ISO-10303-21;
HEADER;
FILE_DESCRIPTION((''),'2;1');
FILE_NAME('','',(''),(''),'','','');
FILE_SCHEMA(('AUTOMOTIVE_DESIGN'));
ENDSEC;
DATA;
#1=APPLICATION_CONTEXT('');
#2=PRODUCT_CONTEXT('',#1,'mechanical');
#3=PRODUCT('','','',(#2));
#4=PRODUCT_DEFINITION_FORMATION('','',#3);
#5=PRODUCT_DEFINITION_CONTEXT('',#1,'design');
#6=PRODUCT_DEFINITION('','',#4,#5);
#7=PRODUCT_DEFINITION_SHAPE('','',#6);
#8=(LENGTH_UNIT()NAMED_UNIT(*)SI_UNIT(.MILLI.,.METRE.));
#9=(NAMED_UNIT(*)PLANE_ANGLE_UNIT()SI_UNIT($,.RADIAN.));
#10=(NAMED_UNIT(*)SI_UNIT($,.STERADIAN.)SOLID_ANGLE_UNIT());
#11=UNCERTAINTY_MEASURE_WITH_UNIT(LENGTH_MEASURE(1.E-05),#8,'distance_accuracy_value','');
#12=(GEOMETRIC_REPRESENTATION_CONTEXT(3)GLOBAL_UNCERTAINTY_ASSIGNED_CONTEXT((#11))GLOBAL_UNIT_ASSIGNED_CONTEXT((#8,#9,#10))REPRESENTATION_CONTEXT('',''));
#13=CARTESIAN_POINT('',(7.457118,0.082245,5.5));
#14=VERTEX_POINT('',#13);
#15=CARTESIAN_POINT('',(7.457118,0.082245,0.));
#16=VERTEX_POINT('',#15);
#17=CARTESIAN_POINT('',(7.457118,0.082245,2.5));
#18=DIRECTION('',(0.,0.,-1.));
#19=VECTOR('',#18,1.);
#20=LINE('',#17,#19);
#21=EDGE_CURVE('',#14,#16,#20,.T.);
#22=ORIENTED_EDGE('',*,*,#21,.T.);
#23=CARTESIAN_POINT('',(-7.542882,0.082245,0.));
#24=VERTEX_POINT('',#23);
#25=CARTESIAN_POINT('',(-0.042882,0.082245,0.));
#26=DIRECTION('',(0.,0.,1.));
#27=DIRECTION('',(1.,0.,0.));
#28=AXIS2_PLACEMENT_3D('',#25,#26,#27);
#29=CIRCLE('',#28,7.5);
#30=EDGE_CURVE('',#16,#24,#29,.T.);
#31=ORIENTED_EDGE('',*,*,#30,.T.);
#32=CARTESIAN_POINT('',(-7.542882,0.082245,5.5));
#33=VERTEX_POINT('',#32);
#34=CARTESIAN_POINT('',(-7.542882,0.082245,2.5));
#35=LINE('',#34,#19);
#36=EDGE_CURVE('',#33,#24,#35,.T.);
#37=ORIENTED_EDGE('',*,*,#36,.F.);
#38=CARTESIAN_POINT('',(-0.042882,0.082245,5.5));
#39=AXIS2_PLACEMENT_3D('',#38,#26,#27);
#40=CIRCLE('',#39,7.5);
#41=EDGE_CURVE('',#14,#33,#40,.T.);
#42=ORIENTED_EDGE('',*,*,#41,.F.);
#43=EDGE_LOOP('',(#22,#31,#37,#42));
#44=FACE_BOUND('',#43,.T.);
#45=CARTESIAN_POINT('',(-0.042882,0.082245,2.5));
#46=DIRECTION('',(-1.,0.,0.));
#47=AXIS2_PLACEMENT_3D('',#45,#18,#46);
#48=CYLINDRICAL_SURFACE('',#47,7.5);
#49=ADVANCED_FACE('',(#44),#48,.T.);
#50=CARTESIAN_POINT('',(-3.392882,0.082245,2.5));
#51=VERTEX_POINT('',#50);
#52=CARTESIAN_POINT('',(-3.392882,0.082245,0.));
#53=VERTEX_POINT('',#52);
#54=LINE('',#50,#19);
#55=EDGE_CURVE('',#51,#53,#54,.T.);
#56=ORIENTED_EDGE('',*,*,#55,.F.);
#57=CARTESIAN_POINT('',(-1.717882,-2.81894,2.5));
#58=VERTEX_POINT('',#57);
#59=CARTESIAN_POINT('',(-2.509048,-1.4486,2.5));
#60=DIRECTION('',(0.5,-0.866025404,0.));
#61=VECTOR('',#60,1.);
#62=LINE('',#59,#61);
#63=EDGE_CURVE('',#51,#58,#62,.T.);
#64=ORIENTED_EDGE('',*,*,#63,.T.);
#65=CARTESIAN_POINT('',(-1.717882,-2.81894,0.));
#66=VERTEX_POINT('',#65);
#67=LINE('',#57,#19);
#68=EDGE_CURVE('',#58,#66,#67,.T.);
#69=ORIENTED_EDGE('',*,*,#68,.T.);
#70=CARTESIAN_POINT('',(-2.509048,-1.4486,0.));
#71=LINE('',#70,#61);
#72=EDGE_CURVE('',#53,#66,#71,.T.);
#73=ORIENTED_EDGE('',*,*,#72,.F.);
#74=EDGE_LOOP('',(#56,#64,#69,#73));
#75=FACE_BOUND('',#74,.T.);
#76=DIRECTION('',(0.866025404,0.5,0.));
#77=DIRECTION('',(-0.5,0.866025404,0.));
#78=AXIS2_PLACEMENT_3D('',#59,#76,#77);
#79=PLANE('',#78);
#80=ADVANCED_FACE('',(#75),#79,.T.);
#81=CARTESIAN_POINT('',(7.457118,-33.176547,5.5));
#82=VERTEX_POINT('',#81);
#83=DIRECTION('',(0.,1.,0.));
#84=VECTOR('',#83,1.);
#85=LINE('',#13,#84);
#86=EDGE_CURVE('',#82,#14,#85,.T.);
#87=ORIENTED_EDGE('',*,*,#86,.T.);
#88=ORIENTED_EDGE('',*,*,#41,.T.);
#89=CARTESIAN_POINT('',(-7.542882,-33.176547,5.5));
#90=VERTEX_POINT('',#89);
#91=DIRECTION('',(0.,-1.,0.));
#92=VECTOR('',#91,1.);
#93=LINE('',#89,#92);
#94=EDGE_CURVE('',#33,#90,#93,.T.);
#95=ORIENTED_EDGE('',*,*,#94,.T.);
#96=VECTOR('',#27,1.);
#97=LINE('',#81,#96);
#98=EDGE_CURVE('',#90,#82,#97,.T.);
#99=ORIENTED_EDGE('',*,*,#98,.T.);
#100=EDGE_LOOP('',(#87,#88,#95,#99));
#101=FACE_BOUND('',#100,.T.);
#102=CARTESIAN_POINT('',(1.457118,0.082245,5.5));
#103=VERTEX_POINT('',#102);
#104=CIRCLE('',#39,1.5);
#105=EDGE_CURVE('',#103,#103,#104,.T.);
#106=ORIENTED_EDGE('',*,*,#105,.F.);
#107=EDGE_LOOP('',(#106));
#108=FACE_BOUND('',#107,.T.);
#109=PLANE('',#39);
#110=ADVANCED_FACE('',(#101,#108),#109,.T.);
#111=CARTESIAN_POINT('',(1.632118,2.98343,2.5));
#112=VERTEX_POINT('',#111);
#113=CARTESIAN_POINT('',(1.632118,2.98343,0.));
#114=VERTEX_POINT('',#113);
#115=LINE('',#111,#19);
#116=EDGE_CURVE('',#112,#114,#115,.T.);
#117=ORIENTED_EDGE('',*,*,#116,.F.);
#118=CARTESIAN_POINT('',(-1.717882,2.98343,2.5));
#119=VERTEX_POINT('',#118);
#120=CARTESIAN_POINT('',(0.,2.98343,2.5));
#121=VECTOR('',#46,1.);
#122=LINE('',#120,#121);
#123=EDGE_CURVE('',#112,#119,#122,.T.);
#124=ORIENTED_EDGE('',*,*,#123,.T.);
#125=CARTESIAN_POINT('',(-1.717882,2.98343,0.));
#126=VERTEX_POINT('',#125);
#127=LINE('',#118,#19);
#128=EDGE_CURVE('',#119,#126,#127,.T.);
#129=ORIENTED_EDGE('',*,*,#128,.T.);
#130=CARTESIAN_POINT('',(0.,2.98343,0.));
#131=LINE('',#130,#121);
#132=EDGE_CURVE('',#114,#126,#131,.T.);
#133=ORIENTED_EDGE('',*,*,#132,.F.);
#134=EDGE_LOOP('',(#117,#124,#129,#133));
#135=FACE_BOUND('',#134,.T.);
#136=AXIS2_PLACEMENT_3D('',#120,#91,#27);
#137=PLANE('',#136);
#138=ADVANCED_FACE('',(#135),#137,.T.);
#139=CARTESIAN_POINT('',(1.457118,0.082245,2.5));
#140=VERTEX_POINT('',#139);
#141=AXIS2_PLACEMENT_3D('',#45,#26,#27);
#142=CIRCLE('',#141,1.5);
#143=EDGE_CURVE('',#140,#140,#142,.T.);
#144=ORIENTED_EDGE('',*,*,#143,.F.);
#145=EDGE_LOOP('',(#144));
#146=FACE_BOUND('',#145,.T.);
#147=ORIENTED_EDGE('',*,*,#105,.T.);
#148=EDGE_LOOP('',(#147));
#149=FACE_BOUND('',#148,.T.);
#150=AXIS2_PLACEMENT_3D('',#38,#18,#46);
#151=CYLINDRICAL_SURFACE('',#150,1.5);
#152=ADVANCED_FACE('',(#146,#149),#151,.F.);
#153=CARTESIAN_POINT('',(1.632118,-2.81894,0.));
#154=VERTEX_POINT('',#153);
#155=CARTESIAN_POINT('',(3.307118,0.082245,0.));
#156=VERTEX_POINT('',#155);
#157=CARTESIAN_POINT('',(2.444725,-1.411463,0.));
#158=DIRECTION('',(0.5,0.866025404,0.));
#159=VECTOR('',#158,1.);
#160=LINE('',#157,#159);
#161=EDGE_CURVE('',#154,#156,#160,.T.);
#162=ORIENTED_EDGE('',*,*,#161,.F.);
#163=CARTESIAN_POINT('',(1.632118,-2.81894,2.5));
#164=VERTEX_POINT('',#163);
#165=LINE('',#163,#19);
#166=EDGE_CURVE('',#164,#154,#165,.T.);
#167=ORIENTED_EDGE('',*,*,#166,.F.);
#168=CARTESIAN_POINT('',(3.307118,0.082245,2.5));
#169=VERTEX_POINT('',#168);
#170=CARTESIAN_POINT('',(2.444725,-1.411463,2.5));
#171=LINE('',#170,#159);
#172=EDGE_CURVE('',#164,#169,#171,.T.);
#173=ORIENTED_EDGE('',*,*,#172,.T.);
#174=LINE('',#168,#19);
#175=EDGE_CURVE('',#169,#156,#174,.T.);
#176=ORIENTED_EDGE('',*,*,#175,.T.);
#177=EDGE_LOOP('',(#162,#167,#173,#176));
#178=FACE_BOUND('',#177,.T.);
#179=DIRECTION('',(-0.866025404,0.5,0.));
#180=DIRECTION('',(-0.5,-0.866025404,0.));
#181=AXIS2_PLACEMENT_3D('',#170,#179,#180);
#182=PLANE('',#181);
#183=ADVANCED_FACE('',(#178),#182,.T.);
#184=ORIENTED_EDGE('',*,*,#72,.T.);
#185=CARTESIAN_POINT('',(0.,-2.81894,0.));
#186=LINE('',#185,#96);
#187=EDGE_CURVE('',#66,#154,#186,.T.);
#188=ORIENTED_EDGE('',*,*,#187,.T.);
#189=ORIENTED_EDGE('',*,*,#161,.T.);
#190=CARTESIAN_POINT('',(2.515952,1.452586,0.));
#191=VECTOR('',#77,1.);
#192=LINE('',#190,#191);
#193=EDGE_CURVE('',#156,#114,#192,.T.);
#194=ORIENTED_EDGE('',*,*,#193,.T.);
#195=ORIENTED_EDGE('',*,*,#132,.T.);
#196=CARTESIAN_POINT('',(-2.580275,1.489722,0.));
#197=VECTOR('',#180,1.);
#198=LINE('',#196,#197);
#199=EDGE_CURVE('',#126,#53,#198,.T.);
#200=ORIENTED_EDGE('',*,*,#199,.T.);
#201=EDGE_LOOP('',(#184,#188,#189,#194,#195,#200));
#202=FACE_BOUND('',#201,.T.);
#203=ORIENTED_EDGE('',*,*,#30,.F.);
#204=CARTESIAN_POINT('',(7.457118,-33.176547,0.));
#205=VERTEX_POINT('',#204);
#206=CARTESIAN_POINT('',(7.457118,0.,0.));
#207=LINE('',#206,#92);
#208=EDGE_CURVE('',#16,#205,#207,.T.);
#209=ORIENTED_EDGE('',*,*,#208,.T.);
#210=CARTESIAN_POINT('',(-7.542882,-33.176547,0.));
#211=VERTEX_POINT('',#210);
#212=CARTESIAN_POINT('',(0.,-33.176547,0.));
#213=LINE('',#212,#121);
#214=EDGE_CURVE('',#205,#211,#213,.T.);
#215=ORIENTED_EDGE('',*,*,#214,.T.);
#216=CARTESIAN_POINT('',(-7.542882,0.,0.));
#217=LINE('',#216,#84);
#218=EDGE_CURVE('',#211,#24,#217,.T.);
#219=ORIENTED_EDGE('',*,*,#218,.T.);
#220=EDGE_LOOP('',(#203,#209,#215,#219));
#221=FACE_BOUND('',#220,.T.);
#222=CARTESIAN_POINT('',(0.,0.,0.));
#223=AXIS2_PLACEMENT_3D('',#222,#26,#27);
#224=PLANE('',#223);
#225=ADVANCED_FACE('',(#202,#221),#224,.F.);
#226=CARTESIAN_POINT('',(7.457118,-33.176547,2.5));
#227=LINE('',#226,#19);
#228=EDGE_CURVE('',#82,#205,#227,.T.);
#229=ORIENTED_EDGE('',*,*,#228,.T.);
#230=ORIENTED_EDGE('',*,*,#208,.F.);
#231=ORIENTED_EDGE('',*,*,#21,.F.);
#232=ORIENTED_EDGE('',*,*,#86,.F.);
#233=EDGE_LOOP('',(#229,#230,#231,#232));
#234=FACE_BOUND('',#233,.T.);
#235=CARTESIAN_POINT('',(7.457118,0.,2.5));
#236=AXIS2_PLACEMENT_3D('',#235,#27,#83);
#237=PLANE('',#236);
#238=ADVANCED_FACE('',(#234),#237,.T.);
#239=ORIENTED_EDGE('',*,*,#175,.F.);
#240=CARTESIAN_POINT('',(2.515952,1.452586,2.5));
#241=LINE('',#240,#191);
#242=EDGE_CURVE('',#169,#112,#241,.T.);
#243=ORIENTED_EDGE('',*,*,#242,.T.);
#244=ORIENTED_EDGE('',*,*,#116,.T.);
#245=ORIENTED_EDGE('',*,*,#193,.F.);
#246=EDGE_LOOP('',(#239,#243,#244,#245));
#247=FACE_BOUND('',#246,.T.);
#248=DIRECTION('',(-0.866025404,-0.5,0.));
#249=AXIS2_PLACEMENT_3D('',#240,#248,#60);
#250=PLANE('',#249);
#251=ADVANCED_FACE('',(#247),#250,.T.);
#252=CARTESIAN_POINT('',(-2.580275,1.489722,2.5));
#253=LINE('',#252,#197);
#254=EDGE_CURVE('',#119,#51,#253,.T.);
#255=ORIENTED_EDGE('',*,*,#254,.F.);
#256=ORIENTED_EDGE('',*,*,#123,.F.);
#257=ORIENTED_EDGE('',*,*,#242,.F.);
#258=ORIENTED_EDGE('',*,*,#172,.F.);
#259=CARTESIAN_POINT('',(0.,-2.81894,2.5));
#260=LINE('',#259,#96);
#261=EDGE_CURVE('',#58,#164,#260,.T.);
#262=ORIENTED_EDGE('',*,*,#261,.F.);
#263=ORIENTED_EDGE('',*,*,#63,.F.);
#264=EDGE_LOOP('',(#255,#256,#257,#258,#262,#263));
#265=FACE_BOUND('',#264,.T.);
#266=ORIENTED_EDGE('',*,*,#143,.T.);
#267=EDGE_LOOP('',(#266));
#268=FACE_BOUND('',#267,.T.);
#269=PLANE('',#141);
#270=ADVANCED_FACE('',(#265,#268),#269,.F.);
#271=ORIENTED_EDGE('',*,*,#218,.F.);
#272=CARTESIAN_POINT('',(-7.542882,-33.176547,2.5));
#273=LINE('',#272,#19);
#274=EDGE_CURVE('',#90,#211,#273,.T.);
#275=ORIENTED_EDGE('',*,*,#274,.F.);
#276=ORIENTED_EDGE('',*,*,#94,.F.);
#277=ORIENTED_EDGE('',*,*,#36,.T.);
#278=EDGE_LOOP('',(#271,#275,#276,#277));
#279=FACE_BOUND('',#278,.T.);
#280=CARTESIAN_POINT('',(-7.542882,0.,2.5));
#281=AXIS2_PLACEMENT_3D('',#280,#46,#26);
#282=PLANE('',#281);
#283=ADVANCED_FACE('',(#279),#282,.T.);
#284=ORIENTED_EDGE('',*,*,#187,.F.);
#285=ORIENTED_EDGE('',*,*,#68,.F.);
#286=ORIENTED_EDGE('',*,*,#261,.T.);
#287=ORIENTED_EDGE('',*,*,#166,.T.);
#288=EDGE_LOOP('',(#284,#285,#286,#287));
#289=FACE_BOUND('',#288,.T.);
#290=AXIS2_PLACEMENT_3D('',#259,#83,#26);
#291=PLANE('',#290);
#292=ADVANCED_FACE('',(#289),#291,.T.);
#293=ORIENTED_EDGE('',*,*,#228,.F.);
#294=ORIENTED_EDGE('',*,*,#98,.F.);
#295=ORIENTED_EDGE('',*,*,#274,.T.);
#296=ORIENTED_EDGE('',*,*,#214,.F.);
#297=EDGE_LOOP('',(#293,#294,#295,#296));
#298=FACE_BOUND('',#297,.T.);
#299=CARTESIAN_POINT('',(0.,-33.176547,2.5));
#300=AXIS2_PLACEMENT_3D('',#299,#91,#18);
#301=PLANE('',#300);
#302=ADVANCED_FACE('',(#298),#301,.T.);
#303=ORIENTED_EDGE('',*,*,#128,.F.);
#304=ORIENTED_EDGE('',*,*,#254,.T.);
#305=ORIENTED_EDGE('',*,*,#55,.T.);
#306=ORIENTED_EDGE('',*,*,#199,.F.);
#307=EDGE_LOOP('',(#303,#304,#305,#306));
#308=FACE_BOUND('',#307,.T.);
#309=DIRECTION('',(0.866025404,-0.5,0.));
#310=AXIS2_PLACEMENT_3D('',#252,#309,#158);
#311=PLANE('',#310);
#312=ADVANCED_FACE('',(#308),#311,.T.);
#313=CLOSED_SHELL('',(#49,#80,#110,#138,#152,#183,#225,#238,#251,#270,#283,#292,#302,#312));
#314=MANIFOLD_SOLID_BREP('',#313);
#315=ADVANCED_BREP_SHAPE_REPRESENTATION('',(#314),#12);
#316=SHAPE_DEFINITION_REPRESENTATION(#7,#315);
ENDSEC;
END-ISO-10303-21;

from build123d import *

# Parameters (mm, degrees)
BOSS_EXTRUDE1_DEPTH = 2.5
SKETCH3_R           = 1.5
BOSS_EXTRUDE2_DEPTH = 3


with BuildPart() as part:
    # Sketch1 → Boss-Extrude1 (new body)
    with BuildSketch(Plane.XY):
        with BuildLine():
            ThreePointArc((7.457118183, 0.082245335), (-0.042881817, 7.582245335), (-7.542881817, 0.082245335))
            Line((-7.542881817, 0.082245335), (-7.542881817, -33.176547175))
            Line((-7.542881817, -33.176547175), (7.457118183, -33.176547175))
            Line((7.457118183, -33.176547175), (7.457118183, 0.082245335))
        make_face()
        Polygon((1.632118183, 2.983430437), (3.307118183, 0.082245335), (1.632118183, -2.818939768), (-0.042881817, -2.818939768), (-1.717881817, -2.818939768), (-3.392881817, 0.082245335), (-1.717881817, 2.983430437), (-0.042881817, 2.983430437), align=None, mode=Mode.SUBTRACT)
    extrude(amount=BOSS_EXTRUDE1_DEPTH)

    # Sketch3 → Boss-Extrude2 (add)
    with BuildSketch(Plane.XY.offset(2.5)):
        with BuildLine():
            Line((7.457118183, 0.082245335), (7.457118183, -33.176547175))
            Line((7.457118183, -33.176547175), (-7.542881817, -33.176547175))
            Line((-7.542881817, -33.176547175), (-7.542881817, 0.082245335))
            ThreePointArc((-7.542881817, 0.082245335), (-0.042881817, 7.582245335), (7.457118183, 0.082245335))
        make_face()
        with Locations((-0.042881817, 0.082245335)):
            Circle(SKETCH3_R, mode=Mode.SUBTRACT)
    extrude(amount=BOSS_EXTRUDE2_DEPTH)


solid = part.part
